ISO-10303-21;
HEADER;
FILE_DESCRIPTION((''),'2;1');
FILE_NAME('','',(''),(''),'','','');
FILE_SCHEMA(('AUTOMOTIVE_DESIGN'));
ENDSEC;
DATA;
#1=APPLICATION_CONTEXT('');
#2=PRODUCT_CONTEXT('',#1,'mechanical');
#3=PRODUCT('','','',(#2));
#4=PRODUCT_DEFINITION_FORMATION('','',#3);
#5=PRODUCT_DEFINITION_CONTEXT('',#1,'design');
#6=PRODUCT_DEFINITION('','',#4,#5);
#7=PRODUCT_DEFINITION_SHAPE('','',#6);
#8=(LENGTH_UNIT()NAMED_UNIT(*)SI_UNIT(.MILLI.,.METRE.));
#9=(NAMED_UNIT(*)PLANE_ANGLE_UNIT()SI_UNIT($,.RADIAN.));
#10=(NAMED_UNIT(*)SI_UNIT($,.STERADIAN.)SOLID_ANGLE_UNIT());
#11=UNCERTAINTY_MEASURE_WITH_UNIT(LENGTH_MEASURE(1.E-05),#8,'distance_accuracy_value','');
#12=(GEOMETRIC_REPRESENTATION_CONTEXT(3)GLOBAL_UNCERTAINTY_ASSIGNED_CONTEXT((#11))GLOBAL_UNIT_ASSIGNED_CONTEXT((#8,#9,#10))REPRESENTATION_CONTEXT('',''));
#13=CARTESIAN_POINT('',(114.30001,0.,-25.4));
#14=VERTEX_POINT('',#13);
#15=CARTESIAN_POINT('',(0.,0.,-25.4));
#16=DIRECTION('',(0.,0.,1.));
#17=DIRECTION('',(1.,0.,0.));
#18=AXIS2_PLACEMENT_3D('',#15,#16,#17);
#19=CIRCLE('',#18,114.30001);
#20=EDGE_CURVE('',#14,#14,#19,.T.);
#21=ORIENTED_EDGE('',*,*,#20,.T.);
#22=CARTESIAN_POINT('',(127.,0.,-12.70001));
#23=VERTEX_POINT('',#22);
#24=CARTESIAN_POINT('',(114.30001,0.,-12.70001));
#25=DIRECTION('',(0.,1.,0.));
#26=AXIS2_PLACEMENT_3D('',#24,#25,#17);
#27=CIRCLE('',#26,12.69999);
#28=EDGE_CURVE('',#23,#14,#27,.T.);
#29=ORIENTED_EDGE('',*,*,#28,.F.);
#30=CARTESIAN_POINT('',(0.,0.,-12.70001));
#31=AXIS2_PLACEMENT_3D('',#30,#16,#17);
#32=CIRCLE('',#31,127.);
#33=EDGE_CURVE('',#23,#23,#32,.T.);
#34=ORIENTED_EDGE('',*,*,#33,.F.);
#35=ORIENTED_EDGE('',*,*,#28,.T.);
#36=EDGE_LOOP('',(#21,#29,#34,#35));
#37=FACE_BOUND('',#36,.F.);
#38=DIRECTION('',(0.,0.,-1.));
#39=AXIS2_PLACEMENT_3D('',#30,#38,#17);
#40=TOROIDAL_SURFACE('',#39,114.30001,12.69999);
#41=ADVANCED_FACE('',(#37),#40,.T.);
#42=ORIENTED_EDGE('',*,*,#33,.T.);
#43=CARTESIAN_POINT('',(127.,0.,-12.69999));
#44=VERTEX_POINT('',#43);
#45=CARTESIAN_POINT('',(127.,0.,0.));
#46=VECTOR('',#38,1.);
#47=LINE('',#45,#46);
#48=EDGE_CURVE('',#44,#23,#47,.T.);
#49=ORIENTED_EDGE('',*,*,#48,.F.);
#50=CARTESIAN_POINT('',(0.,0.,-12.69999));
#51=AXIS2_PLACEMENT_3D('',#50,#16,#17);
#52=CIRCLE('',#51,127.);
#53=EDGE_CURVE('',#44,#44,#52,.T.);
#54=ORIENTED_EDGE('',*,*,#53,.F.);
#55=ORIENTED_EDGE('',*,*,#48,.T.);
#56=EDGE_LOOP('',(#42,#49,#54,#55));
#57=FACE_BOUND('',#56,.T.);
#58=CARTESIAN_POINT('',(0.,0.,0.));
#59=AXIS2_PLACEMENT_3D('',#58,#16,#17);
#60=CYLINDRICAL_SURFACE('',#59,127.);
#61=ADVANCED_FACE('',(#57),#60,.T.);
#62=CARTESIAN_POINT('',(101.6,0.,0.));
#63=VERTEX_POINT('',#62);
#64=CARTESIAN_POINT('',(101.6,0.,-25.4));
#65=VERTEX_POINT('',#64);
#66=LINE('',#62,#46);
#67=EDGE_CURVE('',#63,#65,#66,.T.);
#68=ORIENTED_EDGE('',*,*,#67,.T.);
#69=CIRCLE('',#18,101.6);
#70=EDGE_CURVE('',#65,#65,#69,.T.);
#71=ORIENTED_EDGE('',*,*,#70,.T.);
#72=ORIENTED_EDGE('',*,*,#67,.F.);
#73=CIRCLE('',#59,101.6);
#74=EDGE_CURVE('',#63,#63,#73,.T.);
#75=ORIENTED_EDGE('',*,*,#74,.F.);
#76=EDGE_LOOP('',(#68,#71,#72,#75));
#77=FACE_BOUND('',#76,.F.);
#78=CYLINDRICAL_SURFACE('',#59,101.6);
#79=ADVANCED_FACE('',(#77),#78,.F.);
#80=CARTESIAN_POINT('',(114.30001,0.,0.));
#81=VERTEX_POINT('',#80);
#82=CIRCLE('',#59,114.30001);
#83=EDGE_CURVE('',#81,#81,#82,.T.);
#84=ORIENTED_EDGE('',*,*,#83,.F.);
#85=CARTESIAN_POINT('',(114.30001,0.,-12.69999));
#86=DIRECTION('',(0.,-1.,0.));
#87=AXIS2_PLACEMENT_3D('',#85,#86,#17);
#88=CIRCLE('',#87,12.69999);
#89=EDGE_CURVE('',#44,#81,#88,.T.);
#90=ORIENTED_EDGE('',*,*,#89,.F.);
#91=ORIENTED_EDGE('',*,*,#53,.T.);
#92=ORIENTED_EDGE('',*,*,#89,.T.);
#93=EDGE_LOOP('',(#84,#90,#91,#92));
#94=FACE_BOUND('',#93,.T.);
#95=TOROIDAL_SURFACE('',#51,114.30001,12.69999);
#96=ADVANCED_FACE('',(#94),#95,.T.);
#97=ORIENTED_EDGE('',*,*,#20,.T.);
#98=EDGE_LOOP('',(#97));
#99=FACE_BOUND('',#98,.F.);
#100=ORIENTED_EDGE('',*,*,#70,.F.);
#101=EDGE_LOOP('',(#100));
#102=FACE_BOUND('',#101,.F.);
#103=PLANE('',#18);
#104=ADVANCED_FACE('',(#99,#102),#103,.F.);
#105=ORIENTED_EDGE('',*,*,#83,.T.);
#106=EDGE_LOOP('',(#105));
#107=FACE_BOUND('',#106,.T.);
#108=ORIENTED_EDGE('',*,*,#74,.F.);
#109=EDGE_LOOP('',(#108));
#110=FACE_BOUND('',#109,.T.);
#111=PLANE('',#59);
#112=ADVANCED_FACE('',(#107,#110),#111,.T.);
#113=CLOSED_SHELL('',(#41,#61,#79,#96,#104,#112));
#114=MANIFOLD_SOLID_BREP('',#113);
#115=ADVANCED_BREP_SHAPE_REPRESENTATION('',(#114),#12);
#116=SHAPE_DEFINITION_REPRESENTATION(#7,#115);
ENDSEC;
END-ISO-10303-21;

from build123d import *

# Parameters (mm, degrees)
F0_R     = 127
F0_R_2   = 101.6
F1_DEPTH = 25.4
F2_R     = 12.69999


# Not quite as in the source:
# - a fillet or chamfer is up to 0.001 mm smaller than in the source, because OpenCascade refuses the exact size


with BuildPart() as f1:
    # F0 (on Top) → F1 (new body)
    with BuildSketch(Plane.XY):
        Circle(F0_R)
        Circle(F0_R_2, mode=Mode.SUBTRACT)
    extrude(amount=-F1_DEPTH)

    # F2 (radius 12.7 in the source; OpenCascade refuses exactly that, so slightly less here)
    f2_edges = [f1.edges().sort_by_distance(p)[0] for p in [
        (-127, 0, 0),
        (-127, 0, -25.4),
    ]]
    fillet(f2_edges, radius=F2_R)


solid = f1.part
